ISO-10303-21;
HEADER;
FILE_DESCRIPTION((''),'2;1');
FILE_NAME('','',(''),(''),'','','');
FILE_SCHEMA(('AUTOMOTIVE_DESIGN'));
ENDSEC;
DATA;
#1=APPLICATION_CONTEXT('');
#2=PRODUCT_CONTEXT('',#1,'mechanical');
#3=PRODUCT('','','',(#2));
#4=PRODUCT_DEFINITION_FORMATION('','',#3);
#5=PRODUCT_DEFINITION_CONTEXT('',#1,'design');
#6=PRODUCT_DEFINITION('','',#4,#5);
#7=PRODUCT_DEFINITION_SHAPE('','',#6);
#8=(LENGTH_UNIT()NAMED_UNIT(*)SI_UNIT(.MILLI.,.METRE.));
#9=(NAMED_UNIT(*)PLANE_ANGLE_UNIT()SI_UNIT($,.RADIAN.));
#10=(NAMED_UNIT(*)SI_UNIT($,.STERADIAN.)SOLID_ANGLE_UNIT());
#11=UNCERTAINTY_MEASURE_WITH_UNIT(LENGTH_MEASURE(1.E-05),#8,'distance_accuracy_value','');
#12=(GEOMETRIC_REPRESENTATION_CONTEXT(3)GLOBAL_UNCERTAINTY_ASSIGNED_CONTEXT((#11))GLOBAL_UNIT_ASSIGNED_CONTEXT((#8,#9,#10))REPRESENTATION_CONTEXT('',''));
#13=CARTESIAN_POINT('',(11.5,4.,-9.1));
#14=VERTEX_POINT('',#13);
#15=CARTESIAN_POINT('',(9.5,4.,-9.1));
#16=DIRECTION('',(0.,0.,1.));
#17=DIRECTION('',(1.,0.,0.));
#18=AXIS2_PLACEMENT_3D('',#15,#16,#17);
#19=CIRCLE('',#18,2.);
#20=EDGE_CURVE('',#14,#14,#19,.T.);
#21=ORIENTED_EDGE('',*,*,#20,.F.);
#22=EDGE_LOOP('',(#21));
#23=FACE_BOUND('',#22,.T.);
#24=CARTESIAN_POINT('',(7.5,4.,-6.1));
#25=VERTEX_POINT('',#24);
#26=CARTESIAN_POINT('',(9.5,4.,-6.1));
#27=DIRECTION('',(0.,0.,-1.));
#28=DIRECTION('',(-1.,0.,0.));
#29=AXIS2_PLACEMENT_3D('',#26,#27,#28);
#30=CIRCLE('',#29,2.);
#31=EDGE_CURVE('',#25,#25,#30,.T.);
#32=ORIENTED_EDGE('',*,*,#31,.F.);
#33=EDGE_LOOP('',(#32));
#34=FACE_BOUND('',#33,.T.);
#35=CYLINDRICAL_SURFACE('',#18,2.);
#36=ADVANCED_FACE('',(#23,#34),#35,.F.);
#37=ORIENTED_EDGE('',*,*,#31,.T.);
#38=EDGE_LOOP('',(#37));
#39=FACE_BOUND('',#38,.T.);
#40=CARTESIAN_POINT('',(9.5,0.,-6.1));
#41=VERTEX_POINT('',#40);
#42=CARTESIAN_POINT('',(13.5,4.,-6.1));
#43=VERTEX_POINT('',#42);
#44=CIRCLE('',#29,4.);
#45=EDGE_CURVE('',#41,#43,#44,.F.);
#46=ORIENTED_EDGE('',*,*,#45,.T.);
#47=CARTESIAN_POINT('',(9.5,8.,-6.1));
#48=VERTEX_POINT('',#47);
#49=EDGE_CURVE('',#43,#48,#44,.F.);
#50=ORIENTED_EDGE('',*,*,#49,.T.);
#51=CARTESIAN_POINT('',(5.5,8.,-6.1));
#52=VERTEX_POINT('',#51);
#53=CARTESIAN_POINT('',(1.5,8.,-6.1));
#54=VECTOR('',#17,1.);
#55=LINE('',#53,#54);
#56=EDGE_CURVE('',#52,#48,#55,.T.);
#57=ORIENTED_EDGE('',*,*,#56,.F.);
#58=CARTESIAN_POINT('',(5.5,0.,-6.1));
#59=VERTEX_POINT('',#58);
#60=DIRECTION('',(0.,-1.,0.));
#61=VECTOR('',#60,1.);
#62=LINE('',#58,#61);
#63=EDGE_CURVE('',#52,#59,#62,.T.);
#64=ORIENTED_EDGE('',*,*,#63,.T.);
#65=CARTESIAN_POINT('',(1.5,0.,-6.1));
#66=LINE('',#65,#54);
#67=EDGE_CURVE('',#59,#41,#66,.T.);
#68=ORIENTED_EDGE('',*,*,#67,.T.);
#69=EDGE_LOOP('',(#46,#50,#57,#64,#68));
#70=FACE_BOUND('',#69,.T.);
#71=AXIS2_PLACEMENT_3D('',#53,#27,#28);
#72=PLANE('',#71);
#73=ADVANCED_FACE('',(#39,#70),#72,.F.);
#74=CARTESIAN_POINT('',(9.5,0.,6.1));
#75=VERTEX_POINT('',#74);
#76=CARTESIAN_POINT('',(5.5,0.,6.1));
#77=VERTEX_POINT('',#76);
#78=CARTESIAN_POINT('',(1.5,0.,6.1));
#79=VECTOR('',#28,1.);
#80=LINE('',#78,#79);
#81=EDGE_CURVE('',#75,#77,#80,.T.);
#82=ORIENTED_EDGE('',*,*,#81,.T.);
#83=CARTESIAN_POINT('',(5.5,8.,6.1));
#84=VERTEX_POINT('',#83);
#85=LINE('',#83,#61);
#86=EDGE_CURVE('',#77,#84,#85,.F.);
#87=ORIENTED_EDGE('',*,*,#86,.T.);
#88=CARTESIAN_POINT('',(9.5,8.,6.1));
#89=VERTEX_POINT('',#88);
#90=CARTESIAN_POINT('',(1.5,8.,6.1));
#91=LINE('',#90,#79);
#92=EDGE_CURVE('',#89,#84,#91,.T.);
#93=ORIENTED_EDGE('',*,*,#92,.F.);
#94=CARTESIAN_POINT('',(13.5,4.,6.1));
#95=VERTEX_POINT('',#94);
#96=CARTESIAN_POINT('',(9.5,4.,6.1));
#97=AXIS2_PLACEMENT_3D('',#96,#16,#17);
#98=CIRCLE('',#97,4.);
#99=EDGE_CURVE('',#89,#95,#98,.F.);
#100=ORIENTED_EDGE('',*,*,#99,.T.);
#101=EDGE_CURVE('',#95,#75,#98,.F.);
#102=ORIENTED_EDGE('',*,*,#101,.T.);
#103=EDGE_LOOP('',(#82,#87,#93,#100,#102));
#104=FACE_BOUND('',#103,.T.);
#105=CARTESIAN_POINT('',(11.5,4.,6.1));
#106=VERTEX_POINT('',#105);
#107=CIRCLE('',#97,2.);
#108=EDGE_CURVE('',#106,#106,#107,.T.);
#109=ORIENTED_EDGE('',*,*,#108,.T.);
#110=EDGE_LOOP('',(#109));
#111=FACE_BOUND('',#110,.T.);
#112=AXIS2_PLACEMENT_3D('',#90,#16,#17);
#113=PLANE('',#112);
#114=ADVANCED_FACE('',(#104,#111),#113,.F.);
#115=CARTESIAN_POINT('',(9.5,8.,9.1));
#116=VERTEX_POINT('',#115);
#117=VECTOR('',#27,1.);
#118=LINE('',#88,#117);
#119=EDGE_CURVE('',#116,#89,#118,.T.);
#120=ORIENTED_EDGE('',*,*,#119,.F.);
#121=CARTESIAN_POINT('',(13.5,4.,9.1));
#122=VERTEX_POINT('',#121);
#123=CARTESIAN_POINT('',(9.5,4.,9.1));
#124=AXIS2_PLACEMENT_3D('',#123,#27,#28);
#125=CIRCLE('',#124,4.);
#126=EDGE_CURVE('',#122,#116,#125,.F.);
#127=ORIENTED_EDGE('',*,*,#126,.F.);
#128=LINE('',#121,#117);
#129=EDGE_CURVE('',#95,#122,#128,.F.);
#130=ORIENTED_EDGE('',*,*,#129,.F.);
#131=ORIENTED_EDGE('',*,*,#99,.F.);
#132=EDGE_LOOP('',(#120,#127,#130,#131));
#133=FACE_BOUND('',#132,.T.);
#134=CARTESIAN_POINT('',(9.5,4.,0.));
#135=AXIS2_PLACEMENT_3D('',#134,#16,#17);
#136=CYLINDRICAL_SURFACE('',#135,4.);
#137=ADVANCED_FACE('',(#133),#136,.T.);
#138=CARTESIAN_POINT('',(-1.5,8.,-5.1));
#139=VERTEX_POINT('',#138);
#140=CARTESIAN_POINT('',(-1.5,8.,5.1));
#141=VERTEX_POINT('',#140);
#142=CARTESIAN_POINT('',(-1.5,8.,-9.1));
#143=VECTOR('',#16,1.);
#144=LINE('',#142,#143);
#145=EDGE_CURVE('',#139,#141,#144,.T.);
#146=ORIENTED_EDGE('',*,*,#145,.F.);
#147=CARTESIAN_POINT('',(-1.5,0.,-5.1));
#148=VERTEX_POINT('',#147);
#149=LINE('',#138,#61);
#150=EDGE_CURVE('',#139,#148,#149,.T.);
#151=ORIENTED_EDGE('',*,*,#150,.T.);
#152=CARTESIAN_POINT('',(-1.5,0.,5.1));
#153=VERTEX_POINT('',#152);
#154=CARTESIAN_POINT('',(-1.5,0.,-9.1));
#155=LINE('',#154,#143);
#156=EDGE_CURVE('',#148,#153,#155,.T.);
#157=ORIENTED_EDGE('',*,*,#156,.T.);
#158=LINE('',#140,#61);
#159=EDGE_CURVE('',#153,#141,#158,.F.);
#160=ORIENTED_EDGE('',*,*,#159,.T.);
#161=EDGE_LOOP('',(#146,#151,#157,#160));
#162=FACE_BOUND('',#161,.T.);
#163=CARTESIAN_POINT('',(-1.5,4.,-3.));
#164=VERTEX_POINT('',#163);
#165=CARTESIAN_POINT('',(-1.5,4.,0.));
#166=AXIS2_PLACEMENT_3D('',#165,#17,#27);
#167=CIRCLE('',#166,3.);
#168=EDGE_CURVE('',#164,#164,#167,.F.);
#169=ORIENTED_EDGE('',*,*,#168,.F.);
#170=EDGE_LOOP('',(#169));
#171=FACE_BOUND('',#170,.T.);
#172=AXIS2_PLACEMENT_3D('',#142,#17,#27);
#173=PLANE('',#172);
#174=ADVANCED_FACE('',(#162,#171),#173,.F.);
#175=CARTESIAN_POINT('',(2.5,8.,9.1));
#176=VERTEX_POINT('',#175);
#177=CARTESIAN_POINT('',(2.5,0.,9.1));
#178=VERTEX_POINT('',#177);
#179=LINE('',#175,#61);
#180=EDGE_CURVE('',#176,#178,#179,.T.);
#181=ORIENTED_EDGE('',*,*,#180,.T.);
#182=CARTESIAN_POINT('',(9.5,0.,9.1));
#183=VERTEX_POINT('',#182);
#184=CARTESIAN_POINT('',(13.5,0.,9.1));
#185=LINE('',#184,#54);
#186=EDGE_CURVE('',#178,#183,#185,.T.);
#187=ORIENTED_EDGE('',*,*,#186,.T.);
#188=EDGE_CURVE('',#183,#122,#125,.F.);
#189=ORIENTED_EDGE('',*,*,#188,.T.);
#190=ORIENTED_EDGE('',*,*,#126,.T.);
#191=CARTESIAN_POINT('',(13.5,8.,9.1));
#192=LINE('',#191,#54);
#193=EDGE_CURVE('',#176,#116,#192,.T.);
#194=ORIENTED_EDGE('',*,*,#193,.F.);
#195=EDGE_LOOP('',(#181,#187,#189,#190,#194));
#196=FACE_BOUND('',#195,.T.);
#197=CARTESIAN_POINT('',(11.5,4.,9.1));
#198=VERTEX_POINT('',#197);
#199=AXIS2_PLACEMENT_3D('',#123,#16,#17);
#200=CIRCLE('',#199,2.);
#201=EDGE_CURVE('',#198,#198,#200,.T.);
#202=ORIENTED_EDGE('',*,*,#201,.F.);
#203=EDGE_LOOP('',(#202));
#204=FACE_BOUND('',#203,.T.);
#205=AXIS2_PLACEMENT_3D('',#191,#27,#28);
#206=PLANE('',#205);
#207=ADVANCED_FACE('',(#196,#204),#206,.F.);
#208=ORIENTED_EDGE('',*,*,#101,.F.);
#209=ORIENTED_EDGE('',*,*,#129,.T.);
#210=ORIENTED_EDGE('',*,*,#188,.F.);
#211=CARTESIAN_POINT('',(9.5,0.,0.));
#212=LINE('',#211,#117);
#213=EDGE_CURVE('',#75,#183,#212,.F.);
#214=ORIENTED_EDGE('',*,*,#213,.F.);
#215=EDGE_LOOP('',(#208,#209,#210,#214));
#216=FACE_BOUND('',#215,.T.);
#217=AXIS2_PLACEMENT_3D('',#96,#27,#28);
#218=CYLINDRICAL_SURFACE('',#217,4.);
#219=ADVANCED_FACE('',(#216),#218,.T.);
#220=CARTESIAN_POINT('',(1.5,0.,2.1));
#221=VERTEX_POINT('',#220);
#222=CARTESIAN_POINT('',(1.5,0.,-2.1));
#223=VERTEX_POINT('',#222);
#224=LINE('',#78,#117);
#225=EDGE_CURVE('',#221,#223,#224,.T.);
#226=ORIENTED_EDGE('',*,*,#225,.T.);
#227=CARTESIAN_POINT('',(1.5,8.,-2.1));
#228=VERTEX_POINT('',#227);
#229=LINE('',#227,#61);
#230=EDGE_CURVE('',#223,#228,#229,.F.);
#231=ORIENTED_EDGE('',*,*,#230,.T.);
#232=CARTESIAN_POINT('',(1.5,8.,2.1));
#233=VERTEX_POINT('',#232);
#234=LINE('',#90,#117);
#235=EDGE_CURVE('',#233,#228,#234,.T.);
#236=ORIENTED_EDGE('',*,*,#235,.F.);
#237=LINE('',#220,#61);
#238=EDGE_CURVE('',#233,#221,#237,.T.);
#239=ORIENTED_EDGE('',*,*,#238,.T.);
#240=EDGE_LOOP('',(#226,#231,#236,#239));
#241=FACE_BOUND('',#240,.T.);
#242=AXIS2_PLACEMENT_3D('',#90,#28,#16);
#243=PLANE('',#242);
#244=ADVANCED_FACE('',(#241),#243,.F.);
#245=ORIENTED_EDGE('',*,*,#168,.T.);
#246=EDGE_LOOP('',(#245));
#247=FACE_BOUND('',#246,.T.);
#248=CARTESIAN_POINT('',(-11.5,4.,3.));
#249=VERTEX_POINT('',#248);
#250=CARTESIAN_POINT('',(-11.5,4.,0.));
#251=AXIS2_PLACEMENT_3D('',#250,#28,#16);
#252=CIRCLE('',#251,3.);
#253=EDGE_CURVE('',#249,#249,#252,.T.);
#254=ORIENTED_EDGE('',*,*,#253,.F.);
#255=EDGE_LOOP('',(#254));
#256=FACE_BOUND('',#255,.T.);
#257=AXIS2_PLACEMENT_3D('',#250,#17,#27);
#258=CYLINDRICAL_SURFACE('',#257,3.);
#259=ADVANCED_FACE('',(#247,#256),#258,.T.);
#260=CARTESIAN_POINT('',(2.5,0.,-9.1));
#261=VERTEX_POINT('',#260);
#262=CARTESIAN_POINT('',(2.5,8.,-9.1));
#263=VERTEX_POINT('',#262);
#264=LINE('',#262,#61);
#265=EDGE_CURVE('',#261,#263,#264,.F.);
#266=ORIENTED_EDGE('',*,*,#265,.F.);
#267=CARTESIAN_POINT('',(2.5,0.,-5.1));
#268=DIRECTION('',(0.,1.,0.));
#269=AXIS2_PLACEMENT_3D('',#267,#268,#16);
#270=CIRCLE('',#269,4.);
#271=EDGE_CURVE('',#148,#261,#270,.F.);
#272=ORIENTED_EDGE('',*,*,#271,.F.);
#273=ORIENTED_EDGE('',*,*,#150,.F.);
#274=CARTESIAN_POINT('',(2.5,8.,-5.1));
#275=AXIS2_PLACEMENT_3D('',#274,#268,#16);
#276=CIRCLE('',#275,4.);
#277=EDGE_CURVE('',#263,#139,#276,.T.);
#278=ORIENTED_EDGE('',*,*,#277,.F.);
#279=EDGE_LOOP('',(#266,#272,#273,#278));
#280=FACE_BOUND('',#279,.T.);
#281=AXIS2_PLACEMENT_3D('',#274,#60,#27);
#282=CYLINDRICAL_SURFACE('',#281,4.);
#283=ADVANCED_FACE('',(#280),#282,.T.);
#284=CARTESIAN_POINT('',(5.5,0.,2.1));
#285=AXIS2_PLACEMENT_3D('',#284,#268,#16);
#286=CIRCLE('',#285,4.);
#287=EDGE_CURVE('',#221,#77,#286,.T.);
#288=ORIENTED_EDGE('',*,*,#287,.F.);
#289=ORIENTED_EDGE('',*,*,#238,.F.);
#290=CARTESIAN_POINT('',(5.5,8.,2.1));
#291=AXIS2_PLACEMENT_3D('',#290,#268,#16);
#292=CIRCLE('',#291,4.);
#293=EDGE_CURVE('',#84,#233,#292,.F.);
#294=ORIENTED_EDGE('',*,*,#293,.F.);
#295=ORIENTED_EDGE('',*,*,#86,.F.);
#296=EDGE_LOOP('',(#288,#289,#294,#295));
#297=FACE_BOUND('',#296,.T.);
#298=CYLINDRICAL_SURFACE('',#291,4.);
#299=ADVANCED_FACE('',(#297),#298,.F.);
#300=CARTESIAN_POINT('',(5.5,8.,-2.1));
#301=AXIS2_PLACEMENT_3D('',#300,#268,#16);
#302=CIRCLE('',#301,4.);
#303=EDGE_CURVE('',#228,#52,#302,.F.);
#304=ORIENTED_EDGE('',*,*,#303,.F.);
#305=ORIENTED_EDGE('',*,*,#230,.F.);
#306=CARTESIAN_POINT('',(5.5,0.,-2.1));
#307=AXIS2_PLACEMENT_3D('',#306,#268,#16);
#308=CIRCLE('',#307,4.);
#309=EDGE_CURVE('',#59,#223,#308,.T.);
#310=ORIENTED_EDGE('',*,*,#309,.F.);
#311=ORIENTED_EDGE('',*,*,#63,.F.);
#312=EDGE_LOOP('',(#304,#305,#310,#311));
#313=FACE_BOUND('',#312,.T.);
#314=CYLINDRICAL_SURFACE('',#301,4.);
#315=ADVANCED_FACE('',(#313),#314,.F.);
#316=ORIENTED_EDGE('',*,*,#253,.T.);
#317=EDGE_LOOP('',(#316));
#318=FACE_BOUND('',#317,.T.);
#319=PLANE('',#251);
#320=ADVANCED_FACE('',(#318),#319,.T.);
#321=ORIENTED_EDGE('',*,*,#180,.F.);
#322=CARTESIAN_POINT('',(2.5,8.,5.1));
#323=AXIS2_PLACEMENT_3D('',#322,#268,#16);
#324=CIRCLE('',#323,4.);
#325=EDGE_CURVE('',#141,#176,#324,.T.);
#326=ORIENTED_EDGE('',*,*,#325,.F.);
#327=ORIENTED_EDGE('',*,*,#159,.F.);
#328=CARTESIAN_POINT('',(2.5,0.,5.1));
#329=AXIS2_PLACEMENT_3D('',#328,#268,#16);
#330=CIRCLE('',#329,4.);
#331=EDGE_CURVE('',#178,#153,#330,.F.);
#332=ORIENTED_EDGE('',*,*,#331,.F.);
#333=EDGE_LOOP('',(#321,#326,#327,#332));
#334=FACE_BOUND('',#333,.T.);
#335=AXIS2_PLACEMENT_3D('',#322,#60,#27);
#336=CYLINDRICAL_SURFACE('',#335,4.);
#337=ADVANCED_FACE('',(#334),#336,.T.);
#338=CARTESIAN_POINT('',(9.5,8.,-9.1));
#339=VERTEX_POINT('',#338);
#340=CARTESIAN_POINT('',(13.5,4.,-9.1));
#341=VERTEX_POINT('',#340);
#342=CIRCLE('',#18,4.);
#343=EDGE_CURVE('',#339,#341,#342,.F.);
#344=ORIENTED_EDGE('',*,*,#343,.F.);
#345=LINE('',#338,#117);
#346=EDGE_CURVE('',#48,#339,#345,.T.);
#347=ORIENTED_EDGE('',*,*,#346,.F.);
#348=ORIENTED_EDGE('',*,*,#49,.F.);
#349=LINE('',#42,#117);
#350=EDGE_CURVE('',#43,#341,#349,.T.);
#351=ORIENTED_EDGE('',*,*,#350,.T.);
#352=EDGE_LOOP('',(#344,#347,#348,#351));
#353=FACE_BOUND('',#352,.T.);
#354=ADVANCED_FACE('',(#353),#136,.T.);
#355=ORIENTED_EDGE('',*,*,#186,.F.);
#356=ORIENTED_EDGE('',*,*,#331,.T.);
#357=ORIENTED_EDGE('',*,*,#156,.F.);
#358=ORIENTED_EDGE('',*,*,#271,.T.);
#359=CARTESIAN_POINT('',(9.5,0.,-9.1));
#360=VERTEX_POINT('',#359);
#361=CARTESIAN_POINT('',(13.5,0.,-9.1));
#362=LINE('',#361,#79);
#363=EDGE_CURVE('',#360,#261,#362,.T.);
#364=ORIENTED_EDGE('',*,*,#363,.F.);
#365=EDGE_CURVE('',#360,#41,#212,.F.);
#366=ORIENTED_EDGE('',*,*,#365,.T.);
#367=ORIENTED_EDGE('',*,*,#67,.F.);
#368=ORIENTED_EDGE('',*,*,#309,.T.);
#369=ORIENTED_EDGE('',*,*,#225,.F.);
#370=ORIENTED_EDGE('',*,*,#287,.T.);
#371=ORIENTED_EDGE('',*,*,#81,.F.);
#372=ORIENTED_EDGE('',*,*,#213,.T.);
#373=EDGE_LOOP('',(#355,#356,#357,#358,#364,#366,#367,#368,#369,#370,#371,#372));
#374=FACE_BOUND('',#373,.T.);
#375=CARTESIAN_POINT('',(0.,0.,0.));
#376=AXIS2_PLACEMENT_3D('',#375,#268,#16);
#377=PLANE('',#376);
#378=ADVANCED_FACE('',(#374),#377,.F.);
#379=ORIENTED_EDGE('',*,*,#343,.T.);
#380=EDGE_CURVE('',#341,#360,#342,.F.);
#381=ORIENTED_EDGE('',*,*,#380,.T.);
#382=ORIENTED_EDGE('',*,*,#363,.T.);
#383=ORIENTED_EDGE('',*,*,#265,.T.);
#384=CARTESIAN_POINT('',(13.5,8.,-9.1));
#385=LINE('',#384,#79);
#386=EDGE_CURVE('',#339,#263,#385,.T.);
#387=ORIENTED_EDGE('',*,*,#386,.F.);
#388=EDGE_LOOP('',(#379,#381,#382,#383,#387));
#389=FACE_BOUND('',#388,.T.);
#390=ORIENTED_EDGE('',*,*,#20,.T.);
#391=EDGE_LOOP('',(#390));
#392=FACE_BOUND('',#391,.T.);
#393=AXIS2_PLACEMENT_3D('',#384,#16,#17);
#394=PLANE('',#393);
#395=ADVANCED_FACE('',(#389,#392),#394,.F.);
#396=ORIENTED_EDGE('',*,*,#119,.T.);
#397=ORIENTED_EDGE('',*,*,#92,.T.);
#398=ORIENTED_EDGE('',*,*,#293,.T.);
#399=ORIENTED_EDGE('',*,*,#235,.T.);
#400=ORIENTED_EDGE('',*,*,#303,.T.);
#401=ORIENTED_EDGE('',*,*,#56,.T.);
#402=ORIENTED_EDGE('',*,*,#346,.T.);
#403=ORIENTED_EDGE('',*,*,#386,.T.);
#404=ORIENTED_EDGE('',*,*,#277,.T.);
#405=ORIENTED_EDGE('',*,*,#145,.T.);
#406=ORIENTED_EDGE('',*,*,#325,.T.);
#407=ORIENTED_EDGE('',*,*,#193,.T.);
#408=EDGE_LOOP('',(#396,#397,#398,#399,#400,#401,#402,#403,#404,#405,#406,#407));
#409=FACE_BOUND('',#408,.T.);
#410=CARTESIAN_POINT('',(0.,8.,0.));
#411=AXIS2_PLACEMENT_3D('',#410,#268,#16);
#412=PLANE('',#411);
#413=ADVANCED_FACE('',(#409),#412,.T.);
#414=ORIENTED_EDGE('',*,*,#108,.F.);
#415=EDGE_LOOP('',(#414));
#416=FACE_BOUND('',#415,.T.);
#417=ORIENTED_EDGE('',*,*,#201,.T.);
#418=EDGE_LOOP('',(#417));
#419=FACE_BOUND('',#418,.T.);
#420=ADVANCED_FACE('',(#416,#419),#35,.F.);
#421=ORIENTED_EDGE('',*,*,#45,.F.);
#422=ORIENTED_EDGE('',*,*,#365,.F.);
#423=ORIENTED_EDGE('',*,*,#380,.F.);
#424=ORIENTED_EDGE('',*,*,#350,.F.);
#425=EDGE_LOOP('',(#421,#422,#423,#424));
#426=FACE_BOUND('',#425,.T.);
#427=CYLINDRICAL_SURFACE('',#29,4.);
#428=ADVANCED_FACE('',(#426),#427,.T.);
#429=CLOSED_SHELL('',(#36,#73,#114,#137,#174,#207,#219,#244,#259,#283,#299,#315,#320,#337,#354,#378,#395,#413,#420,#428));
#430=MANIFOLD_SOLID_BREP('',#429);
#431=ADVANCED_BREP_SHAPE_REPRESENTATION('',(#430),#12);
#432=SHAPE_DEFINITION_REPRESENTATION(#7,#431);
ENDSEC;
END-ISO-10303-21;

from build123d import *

# Parameters (mm, degrees)
BOSS_EXTRUDE1_DEPTH = 8
SKETCH2_R           = 2
CUT_EXTRUDE1_DEPTH  = 25.031021618
SKETCH3_R           = 3
BOSS_EXTRUDE2_DEPTH = 10
FILLET1_R           = 4
FILLET2_R           = 4


with BuildPart() as part:
    # Sketch1 → Boss-Extrude1 (new body)
    with BuildSketch(Plane(origin=(0, 0, 0), x_dir=(1, 0, 0), z_dir=(0, 1, 0))):
        Polygon((1.5, -6.1), (1.5, 6.1), (13.5, 6.1), (13.5, 9.1), (-1.5, 9.1), (-1.5, -9.1), (13.5, -9.1), (13.5, -6.1), align=None)
    extrude(amount=BOSS_EXTRUDE1_DEPTH)

    # Sketch2 → Cut-Extrude1 (cut, through all)
    with BuildSketch(Plane.XY.offset(9.1)):
        with Locations((9.5, 4)):
            Circle(SKETCH2_R)
    extrude(amount=-CUT_EXTRUDE1_DEPTH, mode=Mode.SUBTRACT)

    # Sketch3 → Boss-Extrude2 (add)
    with BuildSketch(Plane.ZY.offset(1.5)):
        with Locations(Location((0, 4, 0), (0, 0, 180))):
            Circle(SKETCH3_R)
    extrude(amount=BOSS_EXTRUDE2_DEPTH)

    # Fillet1
    fillet1_edges = [part.edges().sort_by_distance(p)[0] for p in [
        (13.5, 8, -7.6),
        (13.5, 0, -7.6),
        (13.5, 0, 7.6),
        (13.5, 8, 7.6),
    ]]
    fillet(fillet1_edges, radius=FILLET1_R - 0.0001)  # a hair under: the kernel refuses the full size

    # Fillet2
    fillet2_edges = [part.edges().sort_by_distance(p)[0] for p in [
        (1.5, 4, -6.1),
        (1.5, 4, 6.1),
        (-1.5, 4, 9.1),
        (-1.5, 4, -9.1),
    ]]
    fillet(fillet2_edges, radius=FILLET2_R)


solid = part.part
